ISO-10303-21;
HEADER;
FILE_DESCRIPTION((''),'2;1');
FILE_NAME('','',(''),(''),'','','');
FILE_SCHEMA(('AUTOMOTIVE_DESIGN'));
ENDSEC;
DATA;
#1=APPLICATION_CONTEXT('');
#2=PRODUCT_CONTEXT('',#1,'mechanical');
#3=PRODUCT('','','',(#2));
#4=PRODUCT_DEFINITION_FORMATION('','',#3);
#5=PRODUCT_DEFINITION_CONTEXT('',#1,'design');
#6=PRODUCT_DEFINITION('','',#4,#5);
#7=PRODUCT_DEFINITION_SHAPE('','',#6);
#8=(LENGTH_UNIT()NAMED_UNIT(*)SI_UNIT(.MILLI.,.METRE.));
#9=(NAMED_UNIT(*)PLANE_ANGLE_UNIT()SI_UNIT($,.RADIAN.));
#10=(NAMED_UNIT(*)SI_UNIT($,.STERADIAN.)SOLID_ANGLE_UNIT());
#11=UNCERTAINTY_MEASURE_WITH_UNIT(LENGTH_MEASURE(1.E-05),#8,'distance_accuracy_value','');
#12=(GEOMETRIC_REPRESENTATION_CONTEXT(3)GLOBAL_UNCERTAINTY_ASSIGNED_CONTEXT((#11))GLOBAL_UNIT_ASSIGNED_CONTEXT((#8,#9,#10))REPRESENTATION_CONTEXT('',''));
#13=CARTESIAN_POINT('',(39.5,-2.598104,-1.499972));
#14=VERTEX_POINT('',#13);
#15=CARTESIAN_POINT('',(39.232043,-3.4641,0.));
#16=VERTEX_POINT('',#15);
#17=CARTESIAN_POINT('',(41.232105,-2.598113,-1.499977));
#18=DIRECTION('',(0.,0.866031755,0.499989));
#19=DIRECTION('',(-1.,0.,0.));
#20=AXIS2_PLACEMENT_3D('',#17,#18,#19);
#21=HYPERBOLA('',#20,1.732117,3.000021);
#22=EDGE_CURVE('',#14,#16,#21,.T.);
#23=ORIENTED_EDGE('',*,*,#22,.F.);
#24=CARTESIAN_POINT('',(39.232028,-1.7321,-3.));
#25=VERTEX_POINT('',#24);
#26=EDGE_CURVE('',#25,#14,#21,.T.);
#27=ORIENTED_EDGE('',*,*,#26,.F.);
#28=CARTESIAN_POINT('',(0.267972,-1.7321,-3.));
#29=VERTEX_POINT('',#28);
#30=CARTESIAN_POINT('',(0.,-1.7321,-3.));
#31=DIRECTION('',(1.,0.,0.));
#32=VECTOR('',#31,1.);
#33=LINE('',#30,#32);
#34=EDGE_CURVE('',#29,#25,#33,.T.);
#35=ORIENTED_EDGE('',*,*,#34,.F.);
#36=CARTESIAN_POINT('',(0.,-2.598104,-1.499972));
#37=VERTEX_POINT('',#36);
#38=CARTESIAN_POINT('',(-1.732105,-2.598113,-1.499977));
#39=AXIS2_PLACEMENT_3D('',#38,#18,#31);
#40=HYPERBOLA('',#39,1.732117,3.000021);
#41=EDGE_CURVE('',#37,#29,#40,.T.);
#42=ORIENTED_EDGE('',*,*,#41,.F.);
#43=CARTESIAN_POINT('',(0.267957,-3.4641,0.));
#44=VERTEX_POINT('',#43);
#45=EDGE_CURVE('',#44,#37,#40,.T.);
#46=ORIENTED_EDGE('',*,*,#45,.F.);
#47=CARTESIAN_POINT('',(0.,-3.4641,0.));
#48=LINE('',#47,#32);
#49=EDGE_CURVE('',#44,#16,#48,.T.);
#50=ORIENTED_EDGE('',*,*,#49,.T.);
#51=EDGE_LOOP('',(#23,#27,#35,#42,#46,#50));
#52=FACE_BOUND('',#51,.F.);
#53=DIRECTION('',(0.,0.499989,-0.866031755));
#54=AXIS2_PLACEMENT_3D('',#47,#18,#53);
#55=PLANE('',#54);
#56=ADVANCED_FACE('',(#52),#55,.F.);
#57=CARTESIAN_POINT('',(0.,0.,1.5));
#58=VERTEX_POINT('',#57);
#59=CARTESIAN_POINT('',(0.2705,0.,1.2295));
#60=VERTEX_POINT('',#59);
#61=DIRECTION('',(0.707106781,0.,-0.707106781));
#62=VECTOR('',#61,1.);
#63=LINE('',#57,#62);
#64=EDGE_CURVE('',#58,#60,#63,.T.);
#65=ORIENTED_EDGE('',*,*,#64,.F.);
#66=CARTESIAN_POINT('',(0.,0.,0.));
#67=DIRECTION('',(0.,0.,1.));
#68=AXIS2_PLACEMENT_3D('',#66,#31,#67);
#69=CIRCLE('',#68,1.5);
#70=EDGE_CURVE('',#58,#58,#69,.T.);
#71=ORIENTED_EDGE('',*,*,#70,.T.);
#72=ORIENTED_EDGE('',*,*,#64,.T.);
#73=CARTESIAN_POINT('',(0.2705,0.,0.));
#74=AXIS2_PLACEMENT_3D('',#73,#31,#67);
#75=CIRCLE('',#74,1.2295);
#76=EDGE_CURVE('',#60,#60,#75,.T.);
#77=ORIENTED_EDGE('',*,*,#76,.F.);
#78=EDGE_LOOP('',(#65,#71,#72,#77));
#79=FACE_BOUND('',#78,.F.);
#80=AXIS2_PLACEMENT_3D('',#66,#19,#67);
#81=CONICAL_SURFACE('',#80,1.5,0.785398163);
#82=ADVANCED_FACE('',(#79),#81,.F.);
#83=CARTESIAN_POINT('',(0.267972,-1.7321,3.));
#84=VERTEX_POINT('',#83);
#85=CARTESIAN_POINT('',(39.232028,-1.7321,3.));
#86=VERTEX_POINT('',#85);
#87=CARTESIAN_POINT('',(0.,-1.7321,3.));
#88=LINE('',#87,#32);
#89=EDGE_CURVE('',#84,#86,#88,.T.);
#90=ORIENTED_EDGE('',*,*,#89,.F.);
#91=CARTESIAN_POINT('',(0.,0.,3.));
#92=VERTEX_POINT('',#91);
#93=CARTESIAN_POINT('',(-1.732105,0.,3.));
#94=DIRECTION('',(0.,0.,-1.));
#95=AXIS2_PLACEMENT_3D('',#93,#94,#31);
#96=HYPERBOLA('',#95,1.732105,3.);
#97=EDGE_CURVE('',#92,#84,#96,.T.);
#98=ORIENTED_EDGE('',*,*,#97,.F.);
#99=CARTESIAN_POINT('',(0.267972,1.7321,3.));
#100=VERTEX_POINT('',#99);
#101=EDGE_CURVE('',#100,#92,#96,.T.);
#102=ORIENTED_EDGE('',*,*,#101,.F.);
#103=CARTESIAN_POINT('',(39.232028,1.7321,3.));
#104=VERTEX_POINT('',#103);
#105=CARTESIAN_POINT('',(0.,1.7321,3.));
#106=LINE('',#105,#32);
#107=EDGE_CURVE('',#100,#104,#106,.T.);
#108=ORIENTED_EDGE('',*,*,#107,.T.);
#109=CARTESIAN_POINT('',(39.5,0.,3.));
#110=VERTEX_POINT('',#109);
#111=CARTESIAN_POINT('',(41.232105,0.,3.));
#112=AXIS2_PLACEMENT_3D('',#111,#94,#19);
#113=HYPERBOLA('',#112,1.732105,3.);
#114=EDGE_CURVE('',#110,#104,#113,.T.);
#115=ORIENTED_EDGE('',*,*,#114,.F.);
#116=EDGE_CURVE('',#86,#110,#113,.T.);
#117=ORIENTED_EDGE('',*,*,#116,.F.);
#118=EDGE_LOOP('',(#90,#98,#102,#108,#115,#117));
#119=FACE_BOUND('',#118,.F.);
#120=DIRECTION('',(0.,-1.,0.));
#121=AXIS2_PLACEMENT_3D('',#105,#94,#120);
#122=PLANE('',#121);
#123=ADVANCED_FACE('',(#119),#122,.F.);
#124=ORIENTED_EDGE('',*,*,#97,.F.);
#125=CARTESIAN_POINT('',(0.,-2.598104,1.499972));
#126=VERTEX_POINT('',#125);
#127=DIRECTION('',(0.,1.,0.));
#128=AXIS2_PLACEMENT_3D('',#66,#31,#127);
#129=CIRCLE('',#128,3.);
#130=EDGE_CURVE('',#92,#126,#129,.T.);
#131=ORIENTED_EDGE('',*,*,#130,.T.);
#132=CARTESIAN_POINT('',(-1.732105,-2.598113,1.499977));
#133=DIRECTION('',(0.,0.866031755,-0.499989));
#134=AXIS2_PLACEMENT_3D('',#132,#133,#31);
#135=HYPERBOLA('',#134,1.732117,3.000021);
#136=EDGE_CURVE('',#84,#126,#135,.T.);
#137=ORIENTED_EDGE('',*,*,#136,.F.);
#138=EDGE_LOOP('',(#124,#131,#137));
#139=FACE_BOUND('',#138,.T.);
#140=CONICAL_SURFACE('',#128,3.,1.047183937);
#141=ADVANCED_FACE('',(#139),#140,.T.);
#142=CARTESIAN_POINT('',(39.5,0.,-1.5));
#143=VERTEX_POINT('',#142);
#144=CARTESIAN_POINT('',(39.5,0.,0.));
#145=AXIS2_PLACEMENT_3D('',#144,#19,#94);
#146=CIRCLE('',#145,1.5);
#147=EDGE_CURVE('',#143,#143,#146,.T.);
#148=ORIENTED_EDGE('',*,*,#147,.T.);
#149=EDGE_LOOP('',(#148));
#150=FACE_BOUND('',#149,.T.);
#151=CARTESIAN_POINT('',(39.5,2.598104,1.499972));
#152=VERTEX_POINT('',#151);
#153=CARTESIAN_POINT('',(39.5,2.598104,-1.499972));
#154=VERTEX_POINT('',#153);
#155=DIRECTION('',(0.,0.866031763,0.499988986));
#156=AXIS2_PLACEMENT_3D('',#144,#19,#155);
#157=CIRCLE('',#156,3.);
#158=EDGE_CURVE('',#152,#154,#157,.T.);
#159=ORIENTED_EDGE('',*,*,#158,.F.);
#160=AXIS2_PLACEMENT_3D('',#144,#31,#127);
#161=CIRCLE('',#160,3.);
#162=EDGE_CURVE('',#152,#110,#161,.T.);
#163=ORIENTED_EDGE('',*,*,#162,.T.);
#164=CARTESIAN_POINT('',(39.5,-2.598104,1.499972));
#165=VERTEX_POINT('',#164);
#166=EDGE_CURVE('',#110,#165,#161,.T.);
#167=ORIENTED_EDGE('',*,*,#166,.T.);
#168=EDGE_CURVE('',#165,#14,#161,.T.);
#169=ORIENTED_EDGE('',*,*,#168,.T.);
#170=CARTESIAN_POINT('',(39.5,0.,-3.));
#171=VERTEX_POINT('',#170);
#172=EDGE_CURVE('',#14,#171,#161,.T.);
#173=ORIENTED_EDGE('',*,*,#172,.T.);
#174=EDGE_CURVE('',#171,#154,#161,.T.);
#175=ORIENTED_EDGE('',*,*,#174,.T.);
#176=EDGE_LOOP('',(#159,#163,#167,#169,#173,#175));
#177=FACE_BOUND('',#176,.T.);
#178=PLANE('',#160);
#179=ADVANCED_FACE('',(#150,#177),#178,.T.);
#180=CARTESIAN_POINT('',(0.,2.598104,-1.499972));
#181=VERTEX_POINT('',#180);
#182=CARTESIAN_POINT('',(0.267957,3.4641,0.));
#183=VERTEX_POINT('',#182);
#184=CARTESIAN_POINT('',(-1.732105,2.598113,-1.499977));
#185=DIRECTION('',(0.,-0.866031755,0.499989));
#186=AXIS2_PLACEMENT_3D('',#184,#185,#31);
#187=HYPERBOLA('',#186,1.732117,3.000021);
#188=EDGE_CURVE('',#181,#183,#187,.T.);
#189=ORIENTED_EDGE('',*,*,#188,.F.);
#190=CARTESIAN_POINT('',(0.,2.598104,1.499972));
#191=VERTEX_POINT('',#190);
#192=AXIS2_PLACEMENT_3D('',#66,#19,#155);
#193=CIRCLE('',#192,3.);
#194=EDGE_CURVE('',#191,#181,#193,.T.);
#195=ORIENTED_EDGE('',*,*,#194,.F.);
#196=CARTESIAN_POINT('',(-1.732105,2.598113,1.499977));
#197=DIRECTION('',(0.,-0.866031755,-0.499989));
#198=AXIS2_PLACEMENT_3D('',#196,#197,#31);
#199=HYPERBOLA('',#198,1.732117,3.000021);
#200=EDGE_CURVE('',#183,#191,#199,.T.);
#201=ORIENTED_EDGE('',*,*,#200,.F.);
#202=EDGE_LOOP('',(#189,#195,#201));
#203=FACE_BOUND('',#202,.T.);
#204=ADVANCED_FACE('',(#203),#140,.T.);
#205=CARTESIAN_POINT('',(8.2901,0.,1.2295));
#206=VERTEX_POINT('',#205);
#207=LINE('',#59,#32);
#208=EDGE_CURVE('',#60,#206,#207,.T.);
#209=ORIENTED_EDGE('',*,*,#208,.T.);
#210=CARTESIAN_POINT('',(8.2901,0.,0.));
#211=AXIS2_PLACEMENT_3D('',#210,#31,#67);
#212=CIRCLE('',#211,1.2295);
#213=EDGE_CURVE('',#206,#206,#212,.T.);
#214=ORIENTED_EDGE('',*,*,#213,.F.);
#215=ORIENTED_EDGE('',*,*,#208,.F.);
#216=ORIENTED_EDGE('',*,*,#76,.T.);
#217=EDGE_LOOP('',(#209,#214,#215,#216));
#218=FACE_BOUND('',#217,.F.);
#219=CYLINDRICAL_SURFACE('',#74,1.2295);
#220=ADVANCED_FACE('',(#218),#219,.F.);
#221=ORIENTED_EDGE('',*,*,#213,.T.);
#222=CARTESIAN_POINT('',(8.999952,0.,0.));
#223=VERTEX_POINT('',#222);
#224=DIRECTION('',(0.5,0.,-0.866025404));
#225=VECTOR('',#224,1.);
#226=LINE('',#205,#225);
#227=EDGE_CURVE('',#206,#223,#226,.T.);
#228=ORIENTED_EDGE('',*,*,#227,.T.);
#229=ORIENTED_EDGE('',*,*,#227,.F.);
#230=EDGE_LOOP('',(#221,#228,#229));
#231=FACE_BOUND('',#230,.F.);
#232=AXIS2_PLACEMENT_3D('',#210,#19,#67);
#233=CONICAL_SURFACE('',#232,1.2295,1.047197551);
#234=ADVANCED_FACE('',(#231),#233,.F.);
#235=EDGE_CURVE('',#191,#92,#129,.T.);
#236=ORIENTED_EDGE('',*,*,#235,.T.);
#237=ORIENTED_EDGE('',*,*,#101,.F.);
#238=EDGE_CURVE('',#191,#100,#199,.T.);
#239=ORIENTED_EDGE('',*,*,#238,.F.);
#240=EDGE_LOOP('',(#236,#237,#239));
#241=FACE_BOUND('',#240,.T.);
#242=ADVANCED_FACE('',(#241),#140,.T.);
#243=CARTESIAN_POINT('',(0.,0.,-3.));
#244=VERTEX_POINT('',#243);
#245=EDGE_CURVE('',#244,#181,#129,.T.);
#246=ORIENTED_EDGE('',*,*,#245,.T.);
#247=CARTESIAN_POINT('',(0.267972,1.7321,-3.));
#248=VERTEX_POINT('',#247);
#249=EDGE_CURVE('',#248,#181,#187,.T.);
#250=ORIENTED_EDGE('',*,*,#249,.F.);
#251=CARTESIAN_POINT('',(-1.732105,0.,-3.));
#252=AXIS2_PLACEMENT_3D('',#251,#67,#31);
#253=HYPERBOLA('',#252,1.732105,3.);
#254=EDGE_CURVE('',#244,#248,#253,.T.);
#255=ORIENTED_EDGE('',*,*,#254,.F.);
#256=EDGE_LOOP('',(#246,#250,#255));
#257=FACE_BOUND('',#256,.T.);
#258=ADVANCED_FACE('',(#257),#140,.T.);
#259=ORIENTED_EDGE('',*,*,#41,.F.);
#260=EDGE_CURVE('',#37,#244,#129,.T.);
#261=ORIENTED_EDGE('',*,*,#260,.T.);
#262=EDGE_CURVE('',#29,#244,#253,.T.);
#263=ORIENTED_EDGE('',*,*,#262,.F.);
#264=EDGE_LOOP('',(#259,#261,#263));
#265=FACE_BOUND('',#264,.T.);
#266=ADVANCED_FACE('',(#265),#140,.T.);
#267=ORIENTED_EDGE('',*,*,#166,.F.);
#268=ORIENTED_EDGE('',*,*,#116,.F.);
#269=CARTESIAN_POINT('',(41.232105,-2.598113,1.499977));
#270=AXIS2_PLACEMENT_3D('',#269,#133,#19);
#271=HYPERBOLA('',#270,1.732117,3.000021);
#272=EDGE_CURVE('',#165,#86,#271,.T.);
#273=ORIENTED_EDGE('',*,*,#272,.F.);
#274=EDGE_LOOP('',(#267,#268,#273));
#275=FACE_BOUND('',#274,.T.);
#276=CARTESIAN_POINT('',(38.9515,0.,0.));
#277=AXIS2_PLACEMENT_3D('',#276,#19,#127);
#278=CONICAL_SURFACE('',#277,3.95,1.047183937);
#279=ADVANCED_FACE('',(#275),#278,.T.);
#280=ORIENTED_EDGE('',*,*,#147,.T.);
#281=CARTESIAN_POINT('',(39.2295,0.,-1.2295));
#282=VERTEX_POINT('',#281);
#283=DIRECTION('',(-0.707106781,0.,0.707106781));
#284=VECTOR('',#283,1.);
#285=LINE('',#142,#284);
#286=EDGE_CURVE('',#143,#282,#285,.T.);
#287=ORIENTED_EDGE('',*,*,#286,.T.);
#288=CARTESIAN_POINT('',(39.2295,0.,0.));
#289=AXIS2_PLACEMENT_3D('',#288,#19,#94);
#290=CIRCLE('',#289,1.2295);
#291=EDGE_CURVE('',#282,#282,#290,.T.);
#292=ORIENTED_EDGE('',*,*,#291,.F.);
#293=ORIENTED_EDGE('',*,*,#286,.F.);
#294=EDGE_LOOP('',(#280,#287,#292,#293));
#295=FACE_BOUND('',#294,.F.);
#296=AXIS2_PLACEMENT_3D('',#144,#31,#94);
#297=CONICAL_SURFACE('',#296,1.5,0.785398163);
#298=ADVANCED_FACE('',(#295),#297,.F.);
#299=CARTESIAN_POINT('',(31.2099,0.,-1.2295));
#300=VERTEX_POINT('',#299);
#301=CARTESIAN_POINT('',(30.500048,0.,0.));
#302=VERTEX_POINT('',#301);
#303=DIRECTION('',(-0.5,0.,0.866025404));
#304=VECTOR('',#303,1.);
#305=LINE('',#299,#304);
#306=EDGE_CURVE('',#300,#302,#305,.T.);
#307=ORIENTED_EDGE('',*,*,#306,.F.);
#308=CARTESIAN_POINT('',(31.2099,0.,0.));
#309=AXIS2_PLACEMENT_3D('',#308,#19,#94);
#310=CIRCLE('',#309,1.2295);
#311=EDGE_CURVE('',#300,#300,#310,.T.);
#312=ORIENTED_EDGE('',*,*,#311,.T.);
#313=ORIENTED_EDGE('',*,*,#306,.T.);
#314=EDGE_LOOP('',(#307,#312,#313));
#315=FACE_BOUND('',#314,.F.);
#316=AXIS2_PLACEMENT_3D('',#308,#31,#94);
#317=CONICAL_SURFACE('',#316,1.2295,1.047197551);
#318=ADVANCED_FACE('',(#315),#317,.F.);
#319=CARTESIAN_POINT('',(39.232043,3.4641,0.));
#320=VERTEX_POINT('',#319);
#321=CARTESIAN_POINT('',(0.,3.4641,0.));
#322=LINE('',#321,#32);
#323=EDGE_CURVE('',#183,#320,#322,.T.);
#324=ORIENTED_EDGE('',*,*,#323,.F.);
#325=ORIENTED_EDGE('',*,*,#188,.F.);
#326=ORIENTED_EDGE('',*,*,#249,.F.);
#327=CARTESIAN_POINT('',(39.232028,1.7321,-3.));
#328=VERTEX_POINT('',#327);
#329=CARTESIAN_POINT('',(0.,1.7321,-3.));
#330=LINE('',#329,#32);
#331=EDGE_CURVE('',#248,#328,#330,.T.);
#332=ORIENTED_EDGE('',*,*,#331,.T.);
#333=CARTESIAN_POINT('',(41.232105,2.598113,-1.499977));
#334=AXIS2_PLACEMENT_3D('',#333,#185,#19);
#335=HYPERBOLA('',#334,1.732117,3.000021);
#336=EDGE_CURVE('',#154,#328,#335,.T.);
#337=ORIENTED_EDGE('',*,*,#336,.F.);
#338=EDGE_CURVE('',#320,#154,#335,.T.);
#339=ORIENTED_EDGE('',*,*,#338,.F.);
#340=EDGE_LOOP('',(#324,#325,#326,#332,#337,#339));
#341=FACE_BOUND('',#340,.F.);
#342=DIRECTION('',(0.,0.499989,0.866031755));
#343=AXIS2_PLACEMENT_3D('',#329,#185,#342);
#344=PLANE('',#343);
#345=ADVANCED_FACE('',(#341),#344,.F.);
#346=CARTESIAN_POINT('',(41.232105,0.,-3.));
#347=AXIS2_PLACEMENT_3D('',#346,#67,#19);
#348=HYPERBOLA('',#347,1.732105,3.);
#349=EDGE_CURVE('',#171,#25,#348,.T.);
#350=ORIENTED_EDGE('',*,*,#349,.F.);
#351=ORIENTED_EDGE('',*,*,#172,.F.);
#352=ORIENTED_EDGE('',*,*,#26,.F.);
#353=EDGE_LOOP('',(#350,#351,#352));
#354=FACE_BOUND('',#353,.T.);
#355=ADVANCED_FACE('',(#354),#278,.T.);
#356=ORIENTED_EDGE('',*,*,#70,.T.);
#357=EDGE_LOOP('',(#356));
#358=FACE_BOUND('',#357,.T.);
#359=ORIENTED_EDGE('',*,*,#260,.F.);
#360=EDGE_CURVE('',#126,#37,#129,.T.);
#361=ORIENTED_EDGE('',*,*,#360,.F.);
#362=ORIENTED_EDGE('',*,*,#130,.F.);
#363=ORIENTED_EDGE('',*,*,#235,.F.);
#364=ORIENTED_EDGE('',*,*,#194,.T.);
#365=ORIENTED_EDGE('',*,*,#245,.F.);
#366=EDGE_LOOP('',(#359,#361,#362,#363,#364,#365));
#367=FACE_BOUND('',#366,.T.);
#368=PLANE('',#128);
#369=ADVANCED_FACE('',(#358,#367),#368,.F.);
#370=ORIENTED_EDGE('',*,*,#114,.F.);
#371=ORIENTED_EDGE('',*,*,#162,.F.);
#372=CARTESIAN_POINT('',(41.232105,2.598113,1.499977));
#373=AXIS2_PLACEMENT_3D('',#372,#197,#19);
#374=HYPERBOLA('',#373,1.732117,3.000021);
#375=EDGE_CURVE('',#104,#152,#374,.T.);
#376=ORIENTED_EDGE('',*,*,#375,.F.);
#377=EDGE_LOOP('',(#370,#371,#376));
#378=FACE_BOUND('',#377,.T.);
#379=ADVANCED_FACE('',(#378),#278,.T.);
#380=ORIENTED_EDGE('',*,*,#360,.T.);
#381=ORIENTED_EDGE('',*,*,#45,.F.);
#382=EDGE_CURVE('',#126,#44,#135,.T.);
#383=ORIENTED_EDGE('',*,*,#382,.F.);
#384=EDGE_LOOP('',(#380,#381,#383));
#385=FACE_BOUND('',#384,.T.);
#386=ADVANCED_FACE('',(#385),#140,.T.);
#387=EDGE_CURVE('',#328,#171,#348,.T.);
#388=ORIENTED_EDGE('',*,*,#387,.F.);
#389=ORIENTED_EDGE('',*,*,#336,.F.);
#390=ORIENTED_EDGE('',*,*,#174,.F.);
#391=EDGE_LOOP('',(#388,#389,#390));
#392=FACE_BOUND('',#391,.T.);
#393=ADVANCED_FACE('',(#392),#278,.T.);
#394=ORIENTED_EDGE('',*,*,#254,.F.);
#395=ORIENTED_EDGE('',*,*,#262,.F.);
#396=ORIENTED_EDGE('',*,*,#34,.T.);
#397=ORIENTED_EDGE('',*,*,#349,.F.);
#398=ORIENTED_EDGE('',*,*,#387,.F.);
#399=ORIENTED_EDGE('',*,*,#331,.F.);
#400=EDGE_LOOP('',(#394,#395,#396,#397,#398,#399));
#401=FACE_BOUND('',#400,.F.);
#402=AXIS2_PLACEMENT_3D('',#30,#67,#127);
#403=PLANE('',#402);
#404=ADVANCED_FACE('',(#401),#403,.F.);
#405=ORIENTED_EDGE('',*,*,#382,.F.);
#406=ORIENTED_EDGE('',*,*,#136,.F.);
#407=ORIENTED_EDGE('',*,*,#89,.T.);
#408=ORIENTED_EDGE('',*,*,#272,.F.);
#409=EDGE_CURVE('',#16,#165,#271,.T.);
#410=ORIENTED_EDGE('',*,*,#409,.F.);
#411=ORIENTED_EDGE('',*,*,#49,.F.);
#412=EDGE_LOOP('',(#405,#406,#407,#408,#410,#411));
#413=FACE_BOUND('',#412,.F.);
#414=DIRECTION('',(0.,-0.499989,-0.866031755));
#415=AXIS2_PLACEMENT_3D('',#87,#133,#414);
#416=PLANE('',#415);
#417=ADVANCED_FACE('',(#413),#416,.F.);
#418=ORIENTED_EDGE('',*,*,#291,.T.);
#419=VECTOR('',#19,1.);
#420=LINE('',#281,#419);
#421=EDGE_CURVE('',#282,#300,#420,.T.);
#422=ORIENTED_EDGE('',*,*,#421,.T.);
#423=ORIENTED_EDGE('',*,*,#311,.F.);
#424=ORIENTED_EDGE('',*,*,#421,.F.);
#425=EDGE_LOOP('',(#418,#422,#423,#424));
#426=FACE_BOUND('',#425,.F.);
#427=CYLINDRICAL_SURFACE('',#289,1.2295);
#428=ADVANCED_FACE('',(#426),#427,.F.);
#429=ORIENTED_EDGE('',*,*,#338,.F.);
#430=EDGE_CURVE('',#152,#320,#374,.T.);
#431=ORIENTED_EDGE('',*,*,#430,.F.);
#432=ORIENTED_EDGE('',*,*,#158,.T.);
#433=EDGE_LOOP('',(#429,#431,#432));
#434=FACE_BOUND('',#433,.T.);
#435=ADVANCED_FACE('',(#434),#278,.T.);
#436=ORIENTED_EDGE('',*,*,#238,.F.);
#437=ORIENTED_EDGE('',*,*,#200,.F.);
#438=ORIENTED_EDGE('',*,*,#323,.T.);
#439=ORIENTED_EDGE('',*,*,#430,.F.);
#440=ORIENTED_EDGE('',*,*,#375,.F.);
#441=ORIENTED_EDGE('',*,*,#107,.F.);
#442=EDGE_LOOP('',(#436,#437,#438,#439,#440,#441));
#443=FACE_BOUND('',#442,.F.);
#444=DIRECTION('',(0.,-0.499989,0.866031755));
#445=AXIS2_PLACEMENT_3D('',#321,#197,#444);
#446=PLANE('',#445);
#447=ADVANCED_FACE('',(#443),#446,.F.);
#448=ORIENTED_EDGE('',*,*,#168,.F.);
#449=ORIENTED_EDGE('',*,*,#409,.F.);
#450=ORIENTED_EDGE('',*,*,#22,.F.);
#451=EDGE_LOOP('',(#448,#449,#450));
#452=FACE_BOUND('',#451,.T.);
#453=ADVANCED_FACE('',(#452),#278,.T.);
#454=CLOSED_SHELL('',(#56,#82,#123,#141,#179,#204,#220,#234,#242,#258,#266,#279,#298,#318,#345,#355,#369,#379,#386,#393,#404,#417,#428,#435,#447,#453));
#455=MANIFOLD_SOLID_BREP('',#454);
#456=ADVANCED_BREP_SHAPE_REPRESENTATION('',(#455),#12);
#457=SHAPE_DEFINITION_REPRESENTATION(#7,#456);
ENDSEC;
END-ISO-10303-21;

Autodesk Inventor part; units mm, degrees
sketch "Sketch_1" plane through (0, 0, 0) normal (0, 0, 1) x (1, 0, 0)
  line L0 (39.5, 0) -> (0, 0)
  line L1 (0, 0) -> (0, 3)
  line L2 (0, 3) -> (0.5485, 3.95)
  line L3 (0.5485, 3.95) -> (38.9515, 3.95)
  line L4 (38.9515, 3.95) -> (39.5, 3)
  line L5 (39.5, 3) -> (39.5, 0)
  line L6 (39.5, 0) -> (0, 0)
revolve "Revolution1" add sketch "Sketch_1" angle 360 about axis through (39.5, 0, 0) along (1, 0, 0)
sketch "Sketch_2" plane through (0, 0, 0) normal (1, 0, 0) x (0, 1, 0)
  line L0 (6, 6) -> (-6, 6)
  line L1 (-6, 6) -> (-6, -6)
  line L2 (-6, -6) -> (6, -6)
  line L3 (6, -6) -> (6, 6)
  line L4 (-1.7321, 3) -> (-3.4641, 0)
  line L5 (-3.4641, 0) -> (-1.7321, -3)
  line L6 (-1.7321, -3) -> (1.7321, -3)
  line L7 (1.7321, -3) -> (3.4641, 0)
  line L8 (3.4641, 0) -> (1.7321, 3)
  line L9 (1.7321, 3) -> (-1.7321, 3)
extrude "Extrusion1" cut sketch "Sketch_2" along normal blind 39.5
sketch "Sketch3" plane through (0, 0, 0) normal (-1, 0, 0) x (0, 0, 1)
  point P0 (0, 0)
hole "Hole1" at (0, 0, 0) direction (1, 0, 0) diameter 2.459 depth 8.2901 tip angle 120 countersink diameter 3 countersink angle 90 thread size "M3x0.5" class "6H" standard "ISO Metric profile"
sketch "Sketch4" plane through (39.5, 0, 0) normal (1, 0, 0) x (0, 0, -1)
  point P0 (0, 0)
hole "Hole2" at (39.5, 0, 0) direction (-1, 0, 0) diameter 2.459 depth 8.2901 tip angle 120 countersink diameter 3 countersink angle 90 thread size "M3x0.5" class "6H" standard "ISO Metric profile"
ref_plane "C3_XY" through (39.5, 0, 0) normal (-1, 0, 0) x (0, 0, -1)
ref_plane "C3_YZ" through (39.5, 0, 0) normal (0, 0, -1) x (0, -1, 0)
ref_plane "C3_ZX" through (39.5, 0, 0) normal (0, -1, 0) x (-1, 0, 0)
properties part number "ABLSBF6-39.5-M3-N3" material "Aluminum 2014-T4"
